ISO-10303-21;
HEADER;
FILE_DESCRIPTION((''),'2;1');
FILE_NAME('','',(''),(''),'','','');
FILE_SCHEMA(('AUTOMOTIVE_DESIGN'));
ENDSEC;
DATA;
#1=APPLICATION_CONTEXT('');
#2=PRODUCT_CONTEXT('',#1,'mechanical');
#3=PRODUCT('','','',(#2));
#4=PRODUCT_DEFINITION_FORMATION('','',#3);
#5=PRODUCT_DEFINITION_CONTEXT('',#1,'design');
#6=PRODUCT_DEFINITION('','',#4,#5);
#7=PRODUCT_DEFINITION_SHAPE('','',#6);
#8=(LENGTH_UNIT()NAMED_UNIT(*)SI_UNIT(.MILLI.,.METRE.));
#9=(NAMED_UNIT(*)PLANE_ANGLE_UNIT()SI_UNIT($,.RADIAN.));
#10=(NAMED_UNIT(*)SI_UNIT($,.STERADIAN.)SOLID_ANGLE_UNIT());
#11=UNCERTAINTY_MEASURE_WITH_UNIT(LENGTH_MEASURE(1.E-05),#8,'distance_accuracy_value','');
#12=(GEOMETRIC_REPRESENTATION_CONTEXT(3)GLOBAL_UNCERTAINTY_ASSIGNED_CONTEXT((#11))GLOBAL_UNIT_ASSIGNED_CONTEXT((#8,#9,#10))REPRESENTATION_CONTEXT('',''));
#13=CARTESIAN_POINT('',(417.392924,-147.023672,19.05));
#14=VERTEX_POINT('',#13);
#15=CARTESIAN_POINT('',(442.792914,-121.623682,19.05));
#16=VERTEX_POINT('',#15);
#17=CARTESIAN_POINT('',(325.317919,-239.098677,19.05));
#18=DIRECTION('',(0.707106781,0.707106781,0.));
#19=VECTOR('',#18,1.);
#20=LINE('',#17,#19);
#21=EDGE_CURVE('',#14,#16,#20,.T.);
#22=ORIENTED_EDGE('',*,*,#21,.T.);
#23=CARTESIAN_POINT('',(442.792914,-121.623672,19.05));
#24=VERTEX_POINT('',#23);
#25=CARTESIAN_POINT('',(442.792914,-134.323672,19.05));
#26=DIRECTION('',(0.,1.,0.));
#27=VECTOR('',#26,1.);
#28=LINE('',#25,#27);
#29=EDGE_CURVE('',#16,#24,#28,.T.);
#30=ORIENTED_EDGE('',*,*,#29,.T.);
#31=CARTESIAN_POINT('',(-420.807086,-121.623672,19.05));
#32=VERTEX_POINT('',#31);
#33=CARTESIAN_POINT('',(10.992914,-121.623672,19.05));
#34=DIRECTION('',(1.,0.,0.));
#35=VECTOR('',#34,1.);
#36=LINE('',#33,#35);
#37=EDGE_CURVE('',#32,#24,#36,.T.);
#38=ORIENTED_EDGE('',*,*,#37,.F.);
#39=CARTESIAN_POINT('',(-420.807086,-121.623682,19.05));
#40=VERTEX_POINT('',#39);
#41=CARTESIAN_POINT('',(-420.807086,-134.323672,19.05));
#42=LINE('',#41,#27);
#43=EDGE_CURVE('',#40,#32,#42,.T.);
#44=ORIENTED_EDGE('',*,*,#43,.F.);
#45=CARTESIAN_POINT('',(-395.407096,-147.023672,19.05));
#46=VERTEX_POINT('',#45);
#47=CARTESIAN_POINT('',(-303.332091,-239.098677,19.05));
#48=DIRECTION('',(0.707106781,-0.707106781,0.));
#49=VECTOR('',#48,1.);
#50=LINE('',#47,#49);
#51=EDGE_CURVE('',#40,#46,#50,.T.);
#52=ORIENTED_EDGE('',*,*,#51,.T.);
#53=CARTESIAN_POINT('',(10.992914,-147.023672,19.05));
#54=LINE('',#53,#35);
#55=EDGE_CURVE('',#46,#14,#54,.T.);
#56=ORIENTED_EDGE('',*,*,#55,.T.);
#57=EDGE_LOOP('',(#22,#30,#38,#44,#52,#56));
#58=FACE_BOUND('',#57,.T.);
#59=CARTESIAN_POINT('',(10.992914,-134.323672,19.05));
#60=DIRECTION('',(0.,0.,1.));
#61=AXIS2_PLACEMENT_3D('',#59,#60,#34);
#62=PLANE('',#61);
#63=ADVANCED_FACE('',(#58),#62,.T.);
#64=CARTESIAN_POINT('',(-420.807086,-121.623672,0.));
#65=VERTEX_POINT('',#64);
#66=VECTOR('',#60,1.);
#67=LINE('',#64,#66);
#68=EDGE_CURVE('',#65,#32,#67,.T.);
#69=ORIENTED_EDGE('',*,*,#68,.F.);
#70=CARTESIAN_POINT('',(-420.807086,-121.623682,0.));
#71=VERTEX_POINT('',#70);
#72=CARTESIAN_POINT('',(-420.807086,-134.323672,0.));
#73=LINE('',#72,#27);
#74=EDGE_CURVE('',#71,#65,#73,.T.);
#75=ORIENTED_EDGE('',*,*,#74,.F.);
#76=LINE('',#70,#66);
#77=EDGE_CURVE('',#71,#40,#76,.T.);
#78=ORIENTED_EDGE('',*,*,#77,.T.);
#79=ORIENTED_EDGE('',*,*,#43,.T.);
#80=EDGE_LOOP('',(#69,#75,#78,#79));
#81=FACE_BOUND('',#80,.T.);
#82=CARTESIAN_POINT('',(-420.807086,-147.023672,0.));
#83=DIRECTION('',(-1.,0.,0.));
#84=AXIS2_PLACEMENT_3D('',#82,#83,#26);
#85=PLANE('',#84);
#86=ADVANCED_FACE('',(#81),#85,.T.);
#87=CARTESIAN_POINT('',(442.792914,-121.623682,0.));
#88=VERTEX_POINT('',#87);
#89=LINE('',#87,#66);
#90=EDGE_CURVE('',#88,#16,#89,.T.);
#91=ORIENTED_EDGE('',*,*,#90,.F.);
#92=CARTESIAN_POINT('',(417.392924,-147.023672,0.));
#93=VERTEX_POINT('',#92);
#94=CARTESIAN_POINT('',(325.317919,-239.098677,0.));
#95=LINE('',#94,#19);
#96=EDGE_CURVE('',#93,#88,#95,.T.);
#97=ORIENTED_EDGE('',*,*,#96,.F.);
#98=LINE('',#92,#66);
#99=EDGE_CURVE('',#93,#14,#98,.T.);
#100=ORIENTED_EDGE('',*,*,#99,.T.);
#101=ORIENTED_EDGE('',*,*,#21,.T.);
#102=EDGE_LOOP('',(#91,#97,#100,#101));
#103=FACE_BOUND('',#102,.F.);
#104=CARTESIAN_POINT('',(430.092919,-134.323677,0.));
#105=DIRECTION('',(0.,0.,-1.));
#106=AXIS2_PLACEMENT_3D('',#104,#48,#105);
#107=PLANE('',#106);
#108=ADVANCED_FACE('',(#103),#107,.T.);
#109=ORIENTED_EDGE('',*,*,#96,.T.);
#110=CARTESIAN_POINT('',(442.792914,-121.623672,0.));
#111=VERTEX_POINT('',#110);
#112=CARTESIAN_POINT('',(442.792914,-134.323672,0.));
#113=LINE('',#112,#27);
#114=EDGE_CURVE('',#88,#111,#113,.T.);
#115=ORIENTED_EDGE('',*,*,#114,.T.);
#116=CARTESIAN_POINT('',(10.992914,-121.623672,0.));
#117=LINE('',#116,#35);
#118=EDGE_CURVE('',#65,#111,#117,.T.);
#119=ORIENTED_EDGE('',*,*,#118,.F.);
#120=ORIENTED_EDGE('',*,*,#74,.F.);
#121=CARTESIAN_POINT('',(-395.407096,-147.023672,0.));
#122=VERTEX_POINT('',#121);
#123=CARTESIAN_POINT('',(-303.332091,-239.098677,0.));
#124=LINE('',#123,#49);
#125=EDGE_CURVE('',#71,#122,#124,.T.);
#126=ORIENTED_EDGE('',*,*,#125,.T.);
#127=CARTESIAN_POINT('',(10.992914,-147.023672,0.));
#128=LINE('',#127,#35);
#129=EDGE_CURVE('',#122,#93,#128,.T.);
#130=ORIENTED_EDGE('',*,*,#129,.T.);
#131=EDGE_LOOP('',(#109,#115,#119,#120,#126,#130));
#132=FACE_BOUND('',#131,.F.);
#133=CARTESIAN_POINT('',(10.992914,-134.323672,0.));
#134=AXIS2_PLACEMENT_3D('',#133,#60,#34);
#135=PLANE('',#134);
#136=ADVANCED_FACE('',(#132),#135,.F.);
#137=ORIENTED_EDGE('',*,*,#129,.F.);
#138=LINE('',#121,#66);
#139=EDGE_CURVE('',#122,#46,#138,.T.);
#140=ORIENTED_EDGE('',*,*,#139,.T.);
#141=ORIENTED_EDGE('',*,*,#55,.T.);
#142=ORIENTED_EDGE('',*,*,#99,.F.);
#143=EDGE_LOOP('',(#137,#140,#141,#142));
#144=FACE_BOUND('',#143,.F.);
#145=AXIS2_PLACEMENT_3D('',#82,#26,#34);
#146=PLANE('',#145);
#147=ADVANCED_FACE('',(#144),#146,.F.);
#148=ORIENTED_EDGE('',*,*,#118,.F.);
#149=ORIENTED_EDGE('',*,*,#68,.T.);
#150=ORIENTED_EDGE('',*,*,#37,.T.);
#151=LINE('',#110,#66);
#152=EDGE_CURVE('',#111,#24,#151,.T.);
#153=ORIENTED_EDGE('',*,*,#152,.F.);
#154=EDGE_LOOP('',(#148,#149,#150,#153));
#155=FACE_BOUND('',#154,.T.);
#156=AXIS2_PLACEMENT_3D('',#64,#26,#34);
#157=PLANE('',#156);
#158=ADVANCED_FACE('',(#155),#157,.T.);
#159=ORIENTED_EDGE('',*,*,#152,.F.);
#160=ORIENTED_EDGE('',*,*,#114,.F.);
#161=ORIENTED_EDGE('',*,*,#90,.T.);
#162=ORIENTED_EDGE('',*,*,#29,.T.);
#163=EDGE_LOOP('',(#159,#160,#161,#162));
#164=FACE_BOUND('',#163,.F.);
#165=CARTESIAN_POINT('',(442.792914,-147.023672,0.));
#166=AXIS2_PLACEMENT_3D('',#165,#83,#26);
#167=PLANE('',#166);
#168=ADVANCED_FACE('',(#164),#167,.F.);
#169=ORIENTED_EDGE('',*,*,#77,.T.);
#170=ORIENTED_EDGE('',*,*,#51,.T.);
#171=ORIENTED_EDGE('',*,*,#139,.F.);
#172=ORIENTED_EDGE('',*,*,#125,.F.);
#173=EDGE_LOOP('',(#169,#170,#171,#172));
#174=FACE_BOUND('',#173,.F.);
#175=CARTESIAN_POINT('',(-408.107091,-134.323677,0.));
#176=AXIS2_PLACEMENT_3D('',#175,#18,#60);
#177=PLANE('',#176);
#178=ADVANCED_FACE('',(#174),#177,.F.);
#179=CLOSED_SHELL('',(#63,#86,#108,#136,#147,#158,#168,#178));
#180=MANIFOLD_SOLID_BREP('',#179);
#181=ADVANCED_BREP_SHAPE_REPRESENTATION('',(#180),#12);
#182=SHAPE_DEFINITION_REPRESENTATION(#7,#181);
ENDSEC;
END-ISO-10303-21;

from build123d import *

# Parameters (mm, degrees)
F0_W     = 863.6
F0_H     = 25.4
F1_DEPTH = 19.05
F2_SIZE  = 25.39999


# Not quite as in the source:
# - a fillet or chamfer is up to 0.001 mm smaller than in the source, because OpenCascade refuses the exact size


with BuildPart() as f1:
    # F0 (on Top) → F1 (new body)
    with BuildSketch(Plane.XY):
        with Locations((10.9929144382, -134.3236717459)):
            Rectangle(F0_W, F0_H)
    extrude(amount=F1_DEPTH)

    # F2 (size 25.4 in the source; OpenCascade refuses exactly that, so slightly less here)
    f2_edges = [f1.edges().sort_by_distance(p)[0] for p in [
        (442.792914, -147.023672, 9.525),
        (-420.807086, -147.023672, 9.525),
    ]]
    chamfer(f2_edges, length=F2_SIZE)


solid = f1.part
